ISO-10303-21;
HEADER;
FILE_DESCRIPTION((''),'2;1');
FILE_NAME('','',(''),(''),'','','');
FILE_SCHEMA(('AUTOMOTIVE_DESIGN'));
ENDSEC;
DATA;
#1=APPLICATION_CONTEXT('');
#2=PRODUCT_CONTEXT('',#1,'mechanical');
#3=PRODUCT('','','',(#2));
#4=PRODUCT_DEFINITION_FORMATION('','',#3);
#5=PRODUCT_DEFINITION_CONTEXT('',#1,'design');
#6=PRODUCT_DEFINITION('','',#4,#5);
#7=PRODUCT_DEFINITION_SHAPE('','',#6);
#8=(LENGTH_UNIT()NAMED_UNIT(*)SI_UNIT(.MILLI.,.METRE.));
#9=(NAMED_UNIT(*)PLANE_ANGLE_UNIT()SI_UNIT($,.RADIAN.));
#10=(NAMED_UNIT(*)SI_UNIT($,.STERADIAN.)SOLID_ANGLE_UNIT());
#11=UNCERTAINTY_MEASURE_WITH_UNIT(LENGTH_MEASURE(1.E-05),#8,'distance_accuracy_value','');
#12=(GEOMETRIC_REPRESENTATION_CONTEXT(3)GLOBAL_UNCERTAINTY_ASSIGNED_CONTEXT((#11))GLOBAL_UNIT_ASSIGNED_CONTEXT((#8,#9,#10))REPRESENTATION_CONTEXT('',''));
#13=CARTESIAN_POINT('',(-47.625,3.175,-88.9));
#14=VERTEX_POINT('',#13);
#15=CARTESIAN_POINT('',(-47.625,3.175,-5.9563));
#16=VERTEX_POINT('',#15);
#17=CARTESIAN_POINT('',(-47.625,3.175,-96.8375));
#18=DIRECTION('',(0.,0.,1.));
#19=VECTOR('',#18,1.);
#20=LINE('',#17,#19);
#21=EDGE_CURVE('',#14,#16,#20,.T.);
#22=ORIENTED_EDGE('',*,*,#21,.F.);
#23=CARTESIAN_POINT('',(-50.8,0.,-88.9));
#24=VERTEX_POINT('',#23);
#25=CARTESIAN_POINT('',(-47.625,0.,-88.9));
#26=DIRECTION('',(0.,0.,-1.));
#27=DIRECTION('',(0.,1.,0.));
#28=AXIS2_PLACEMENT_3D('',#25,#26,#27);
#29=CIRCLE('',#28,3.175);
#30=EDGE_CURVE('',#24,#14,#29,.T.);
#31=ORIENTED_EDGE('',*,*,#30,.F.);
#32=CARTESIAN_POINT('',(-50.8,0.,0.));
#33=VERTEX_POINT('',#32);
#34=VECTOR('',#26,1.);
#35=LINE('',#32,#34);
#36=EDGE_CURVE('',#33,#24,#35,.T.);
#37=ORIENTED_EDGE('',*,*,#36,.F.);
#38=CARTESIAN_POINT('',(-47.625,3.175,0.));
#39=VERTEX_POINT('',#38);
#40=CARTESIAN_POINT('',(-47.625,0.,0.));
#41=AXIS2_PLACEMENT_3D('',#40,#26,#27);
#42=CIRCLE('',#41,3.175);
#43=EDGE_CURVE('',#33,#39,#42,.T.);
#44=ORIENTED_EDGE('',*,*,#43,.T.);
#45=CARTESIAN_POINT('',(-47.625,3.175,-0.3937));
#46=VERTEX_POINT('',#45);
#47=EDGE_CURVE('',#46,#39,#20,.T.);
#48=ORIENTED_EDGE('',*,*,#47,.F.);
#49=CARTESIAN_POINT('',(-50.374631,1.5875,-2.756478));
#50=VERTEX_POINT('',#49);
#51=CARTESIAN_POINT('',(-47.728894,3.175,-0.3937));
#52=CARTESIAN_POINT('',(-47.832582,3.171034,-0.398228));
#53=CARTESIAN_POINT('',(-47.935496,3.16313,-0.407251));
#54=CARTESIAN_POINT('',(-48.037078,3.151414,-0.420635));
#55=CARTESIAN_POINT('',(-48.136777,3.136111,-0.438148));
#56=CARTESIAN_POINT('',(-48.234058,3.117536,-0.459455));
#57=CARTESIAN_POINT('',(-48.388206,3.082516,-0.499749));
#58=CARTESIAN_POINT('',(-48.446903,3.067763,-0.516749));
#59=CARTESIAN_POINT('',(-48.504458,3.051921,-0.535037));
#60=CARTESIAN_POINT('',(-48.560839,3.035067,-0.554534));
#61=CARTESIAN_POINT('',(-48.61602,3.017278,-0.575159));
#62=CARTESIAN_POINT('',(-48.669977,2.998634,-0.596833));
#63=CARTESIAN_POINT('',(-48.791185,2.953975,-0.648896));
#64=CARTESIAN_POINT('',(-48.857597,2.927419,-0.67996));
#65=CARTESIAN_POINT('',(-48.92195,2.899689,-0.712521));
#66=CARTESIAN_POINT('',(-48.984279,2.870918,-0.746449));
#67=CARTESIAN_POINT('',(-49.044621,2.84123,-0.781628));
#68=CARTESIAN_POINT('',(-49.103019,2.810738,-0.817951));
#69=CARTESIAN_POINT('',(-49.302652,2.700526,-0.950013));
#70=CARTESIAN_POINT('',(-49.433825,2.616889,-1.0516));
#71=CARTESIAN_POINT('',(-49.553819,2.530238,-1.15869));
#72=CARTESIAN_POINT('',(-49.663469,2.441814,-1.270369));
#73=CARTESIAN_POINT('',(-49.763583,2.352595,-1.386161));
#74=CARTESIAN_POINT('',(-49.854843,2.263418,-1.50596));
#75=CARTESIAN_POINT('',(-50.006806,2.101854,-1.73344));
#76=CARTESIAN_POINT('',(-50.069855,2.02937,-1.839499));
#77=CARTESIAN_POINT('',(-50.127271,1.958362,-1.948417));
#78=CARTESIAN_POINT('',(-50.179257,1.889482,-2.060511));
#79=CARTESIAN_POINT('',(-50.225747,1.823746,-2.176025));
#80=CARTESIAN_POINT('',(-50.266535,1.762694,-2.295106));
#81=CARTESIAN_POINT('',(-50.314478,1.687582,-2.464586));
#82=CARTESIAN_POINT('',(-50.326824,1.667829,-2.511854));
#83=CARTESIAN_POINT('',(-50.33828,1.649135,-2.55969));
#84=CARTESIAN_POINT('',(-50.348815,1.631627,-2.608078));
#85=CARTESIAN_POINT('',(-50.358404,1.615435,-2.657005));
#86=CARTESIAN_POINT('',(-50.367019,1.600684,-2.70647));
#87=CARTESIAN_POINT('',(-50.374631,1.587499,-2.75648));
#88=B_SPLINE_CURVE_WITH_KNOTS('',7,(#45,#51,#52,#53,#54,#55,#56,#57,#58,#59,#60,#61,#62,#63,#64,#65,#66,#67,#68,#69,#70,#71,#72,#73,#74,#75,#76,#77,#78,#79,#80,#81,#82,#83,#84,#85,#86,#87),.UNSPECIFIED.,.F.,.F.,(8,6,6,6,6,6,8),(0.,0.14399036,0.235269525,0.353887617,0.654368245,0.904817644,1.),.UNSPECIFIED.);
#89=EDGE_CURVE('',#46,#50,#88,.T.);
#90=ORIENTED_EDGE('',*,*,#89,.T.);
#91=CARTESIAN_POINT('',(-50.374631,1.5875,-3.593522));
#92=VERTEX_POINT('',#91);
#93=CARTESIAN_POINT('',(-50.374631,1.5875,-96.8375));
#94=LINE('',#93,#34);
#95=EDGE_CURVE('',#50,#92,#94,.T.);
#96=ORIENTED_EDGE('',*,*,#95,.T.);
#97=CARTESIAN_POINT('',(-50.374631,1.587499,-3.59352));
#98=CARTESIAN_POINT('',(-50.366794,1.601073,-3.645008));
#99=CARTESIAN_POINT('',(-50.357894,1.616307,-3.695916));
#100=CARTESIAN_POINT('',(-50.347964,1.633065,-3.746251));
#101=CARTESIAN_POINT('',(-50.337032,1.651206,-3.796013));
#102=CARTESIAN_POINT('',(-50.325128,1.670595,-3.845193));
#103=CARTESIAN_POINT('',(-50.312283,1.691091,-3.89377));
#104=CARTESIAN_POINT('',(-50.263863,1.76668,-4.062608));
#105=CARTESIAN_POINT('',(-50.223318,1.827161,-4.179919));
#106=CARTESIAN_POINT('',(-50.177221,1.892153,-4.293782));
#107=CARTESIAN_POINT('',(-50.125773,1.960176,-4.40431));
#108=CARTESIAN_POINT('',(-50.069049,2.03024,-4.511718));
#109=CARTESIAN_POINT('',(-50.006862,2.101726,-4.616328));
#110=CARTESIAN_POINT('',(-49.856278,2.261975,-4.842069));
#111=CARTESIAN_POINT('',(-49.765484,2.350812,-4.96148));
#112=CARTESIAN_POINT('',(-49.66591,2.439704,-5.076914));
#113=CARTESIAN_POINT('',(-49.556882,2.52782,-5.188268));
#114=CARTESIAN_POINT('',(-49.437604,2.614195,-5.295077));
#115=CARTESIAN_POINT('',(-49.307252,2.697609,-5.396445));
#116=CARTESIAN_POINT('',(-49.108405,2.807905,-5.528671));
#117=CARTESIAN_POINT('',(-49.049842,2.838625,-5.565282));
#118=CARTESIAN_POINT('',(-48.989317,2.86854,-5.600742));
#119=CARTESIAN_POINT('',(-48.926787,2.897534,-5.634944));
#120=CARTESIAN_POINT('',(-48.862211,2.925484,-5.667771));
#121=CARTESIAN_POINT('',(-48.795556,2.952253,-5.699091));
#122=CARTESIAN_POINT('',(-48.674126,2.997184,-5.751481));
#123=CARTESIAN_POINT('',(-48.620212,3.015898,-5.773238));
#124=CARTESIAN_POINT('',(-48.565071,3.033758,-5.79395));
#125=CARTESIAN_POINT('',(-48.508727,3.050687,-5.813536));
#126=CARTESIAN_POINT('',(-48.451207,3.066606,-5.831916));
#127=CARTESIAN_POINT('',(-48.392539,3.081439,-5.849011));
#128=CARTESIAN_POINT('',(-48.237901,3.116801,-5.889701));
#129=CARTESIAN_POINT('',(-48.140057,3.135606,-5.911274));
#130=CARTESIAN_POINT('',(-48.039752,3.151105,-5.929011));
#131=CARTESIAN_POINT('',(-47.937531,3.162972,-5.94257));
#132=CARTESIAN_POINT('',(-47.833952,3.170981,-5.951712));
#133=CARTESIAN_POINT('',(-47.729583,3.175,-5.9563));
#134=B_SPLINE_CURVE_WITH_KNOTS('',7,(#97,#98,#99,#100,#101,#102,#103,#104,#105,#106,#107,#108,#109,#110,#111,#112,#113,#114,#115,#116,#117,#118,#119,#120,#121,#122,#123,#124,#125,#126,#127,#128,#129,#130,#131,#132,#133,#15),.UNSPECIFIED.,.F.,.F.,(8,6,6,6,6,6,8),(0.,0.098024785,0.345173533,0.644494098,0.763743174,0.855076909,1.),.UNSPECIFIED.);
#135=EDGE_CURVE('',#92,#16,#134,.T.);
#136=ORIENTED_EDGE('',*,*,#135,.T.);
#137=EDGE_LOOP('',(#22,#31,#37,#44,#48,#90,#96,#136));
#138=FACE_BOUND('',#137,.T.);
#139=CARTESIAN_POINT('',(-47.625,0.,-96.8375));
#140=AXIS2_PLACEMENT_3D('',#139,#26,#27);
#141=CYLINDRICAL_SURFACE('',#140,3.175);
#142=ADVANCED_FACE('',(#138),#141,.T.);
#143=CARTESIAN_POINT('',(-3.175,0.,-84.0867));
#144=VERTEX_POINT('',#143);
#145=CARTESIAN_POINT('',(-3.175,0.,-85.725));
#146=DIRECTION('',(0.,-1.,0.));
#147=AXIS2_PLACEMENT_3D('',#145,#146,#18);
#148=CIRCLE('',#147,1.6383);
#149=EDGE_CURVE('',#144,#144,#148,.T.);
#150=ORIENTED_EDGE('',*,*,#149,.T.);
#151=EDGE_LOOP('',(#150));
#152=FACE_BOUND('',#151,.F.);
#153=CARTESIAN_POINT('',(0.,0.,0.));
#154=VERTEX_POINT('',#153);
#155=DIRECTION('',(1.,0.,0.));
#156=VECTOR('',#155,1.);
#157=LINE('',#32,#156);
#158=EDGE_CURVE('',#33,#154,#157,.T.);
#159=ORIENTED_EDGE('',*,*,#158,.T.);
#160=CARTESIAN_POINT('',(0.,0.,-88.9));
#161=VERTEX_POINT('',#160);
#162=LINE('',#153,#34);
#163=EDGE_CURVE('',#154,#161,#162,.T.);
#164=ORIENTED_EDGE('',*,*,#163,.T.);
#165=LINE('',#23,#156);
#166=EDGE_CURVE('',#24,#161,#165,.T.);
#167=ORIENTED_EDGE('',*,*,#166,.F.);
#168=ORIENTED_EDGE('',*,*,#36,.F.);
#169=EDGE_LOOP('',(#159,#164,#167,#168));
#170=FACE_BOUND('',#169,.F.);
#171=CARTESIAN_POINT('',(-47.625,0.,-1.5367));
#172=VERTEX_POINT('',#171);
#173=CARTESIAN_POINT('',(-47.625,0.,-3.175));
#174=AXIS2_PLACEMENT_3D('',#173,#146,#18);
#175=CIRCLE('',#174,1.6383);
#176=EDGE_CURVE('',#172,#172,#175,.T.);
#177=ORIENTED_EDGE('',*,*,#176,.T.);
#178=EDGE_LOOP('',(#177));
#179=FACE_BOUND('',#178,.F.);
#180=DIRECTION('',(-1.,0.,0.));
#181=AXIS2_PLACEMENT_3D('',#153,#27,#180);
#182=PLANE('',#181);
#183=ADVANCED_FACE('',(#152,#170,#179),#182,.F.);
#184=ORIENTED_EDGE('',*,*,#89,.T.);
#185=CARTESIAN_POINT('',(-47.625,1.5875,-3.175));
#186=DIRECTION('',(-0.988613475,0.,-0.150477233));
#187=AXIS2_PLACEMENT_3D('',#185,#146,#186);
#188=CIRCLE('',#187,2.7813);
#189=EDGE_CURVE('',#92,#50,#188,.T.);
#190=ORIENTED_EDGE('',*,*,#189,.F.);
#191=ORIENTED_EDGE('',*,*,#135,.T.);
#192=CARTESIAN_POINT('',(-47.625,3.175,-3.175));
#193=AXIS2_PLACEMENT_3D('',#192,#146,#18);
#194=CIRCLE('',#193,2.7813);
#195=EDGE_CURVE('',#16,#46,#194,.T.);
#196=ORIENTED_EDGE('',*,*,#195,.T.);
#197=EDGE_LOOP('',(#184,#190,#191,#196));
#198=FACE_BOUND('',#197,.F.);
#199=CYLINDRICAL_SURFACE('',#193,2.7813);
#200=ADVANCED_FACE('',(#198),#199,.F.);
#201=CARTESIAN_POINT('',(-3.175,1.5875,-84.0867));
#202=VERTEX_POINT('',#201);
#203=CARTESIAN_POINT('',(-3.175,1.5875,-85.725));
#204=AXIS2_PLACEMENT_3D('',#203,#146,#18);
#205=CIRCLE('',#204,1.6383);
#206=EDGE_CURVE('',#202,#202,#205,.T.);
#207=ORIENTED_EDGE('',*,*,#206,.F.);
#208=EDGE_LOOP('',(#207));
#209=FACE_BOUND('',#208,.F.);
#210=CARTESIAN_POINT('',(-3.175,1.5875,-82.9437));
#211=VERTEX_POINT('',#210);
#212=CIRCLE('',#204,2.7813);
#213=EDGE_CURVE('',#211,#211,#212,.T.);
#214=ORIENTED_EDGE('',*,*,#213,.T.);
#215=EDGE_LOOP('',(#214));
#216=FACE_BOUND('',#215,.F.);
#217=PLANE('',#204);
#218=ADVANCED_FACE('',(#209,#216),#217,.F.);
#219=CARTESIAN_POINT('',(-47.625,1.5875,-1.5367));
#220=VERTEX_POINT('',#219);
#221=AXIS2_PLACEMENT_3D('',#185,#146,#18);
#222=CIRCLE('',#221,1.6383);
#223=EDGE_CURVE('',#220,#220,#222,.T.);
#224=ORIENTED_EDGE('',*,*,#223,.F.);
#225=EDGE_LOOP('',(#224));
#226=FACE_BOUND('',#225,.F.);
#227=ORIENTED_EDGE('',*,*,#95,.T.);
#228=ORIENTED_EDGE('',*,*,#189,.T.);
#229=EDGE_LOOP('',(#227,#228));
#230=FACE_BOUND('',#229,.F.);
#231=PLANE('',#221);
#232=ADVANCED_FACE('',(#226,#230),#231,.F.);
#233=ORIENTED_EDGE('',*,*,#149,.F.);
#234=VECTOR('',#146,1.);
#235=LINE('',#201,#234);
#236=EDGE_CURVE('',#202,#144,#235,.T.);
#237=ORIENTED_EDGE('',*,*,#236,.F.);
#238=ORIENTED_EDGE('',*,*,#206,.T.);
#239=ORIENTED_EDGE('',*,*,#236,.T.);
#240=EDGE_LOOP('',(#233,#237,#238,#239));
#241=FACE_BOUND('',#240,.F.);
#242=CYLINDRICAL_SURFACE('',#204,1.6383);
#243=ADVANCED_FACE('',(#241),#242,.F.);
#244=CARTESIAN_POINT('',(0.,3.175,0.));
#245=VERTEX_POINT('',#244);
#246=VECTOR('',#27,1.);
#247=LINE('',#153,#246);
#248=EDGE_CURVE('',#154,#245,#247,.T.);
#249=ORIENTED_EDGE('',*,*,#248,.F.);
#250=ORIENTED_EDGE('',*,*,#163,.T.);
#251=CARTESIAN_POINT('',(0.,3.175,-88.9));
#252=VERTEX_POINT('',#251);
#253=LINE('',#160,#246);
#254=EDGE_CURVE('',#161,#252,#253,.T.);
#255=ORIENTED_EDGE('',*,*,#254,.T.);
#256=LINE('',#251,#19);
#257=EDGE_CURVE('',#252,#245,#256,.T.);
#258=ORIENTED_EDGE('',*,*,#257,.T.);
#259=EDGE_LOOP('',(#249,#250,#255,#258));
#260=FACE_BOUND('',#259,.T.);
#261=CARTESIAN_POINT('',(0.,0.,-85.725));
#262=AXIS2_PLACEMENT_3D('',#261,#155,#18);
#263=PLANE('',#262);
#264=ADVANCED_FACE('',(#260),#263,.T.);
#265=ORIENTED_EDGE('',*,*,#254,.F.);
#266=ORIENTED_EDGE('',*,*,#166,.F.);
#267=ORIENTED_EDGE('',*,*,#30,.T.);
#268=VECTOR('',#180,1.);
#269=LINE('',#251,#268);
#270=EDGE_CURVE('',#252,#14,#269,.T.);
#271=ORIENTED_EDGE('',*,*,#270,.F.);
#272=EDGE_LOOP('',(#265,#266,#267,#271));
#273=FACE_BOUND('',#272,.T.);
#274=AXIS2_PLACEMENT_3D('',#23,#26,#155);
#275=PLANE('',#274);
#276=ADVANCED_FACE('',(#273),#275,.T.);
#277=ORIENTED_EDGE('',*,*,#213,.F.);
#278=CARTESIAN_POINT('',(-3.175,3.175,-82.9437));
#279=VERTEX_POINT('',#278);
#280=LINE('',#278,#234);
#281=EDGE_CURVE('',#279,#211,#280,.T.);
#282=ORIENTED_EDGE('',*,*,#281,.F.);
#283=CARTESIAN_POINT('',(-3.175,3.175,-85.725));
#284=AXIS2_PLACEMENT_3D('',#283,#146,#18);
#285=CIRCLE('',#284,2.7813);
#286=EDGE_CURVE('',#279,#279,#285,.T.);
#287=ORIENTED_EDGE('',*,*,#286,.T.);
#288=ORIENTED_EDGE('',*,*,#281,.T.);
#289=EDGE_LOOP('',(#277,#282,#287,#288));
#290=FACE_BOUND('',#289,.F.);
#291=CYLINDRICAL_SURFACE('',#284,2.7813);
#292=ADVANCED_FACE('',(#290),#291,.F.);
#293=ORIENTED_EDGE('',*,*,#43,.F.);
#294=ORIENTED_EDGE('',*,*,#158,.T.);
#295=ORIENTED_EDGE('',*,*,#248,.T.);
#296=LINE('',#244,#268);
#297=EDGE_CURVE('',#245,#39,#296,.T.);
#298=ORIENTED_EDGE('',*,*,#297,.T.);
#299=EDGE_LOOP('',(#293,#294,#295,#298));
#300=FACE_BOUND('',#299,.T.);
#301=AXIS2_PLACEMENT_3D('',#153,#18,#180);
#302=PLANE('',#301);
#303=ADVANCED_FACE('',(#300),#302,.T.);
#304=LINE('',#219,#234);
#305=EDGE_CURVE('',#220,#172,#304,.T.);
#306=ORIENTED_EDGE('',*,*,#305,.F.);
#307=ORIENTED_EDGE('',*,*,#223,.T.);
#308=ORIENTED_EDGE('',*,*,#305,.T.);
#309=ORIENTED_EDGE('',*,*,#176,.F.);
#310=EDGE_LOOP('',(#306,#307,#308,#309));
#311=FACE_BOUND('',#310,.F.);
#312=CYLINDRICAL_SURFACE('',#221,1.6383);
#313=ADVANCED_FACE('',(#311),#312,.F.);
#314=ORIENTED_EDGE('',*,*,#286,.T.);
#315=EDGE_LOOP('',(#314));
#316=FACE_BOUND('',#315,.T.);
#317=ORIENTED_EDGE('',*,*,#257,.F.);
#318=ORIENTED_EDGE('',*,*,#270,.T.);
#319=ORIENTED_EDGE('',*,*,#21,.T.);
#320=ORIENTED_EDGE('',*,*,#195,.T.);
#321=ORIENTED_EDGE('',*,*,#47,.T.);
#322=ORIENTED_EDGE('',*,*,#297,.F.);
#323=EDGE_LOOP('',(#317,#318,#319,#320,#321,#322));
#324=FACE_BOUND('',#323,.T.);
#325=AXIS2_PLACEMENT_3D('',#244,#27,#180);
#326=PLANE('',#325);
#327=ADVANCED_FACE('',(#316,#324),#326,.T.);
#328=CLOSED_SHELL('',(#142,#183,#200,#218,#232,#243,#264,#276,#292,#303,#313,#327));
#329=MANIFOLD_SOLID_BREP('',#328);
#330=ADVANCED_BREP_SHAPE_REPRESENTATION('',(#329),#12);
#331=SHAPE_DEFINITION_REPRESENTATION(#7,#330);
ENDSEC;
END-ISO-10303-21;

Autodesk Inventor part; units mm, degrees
ref_plane "YZ Plane" through (0, 0, 0) normal (1, 0, 0) x (0, 1, 0)
ref_plane "XZ Plane" through (0, 0, 0) normal (0, 1, 0) x (-1, 0, 0)
ref_plane "XY Plane" through (0, 0, 0) normal (0, 0, 1) x (1, 0, 0)
sketch "Sketch1" plane through (0, 0, 0) normal (0, 1, 0) x (-1, 0, 0)
  line L0 (0, 0) -> (50.8, 0)
  line L1 (50.8, 0) -> (50.8, -88.9)
  line L2 (50.8, -88.9) -> (0, -88.9)
  line L3 (0, -88.9) -> (0, 0)
  line L4 (50.8, 0) -> (47.625, 0)
  line L5 (47.625, 0) -> (47.625, -3.175)
  line L6 (47.625, -3.175) -> (50.8, -3.175)
  line L7 (50.8, -3.175) -> (50.8, 0)
  line L8 (0, -88.9) -> (3.175, -88.9)
  line L9 (3.175, -88.9) -> (3.175, -85.725)
  line L10 (3.175, -85.725) -> (0, -85.725)
  line L11 (0, -85.725) -> (0, -88.9)
  dimension "d0" = 50.8
  dimension "d1" = 88.9
  dimension "d2" = 3.175
  dimension "d3" = 3.175
  dimension "d4" = 3.175
  dimension "d5" = 3.175
extrude "Extrusion1" add sketch "Sketch1" along normal blind 3.175
sketch "Sketch2" plane through (0, 3.175, 0) normal (0, 1, 0) x (1, 0, 0)
  line L0 (-50.8, 0) -> (0, 0) projected
  line L1 (-50.8, 0) -> (-47.625, 0)
  line L2 (-47.625, 0) -> (-47.625, 3.175)
  line L3 (-47.625, 3.175) -> (-50.8, 3.175)
  line L4 (-50.8, 3.175) -> (-50.8, 0)
  line L5 (0, 88.9) -> (-50.8, 88.9) projected
  line L6 (0, 88.9) -> (-3.175, 88.9)
  line L7 (-3.175, 88.9) -> (-3.175, 85.725)
  line L8 (-3.175, 85.725) -> (0, 85.725)
  line L9 (0, 85.725) -> (0, 88.9)
  dimension "d15" = 3.175
  dimension "d16" = 3.175
  dimension "d17" = 3.175
  dimension "d18" = 3.175
hole "Hole2" at (-47.625, 3.175, -3.175) at (-3.175, 3.175, -85.725) direction (0, -1, 0) diameter 3.2766 depth 7.9375 counterbore diameter 5.5626 counterbore depth 1.5875 clearance for "Socket Head Cap Screw" size "#4" standard "Ansi Unified Screw Threads"
fillet "Fillet1" radius 3.175 1 edges at (-50.8, 3.175, -44.45)
properties part number "DualSensorReadout - Lid"
